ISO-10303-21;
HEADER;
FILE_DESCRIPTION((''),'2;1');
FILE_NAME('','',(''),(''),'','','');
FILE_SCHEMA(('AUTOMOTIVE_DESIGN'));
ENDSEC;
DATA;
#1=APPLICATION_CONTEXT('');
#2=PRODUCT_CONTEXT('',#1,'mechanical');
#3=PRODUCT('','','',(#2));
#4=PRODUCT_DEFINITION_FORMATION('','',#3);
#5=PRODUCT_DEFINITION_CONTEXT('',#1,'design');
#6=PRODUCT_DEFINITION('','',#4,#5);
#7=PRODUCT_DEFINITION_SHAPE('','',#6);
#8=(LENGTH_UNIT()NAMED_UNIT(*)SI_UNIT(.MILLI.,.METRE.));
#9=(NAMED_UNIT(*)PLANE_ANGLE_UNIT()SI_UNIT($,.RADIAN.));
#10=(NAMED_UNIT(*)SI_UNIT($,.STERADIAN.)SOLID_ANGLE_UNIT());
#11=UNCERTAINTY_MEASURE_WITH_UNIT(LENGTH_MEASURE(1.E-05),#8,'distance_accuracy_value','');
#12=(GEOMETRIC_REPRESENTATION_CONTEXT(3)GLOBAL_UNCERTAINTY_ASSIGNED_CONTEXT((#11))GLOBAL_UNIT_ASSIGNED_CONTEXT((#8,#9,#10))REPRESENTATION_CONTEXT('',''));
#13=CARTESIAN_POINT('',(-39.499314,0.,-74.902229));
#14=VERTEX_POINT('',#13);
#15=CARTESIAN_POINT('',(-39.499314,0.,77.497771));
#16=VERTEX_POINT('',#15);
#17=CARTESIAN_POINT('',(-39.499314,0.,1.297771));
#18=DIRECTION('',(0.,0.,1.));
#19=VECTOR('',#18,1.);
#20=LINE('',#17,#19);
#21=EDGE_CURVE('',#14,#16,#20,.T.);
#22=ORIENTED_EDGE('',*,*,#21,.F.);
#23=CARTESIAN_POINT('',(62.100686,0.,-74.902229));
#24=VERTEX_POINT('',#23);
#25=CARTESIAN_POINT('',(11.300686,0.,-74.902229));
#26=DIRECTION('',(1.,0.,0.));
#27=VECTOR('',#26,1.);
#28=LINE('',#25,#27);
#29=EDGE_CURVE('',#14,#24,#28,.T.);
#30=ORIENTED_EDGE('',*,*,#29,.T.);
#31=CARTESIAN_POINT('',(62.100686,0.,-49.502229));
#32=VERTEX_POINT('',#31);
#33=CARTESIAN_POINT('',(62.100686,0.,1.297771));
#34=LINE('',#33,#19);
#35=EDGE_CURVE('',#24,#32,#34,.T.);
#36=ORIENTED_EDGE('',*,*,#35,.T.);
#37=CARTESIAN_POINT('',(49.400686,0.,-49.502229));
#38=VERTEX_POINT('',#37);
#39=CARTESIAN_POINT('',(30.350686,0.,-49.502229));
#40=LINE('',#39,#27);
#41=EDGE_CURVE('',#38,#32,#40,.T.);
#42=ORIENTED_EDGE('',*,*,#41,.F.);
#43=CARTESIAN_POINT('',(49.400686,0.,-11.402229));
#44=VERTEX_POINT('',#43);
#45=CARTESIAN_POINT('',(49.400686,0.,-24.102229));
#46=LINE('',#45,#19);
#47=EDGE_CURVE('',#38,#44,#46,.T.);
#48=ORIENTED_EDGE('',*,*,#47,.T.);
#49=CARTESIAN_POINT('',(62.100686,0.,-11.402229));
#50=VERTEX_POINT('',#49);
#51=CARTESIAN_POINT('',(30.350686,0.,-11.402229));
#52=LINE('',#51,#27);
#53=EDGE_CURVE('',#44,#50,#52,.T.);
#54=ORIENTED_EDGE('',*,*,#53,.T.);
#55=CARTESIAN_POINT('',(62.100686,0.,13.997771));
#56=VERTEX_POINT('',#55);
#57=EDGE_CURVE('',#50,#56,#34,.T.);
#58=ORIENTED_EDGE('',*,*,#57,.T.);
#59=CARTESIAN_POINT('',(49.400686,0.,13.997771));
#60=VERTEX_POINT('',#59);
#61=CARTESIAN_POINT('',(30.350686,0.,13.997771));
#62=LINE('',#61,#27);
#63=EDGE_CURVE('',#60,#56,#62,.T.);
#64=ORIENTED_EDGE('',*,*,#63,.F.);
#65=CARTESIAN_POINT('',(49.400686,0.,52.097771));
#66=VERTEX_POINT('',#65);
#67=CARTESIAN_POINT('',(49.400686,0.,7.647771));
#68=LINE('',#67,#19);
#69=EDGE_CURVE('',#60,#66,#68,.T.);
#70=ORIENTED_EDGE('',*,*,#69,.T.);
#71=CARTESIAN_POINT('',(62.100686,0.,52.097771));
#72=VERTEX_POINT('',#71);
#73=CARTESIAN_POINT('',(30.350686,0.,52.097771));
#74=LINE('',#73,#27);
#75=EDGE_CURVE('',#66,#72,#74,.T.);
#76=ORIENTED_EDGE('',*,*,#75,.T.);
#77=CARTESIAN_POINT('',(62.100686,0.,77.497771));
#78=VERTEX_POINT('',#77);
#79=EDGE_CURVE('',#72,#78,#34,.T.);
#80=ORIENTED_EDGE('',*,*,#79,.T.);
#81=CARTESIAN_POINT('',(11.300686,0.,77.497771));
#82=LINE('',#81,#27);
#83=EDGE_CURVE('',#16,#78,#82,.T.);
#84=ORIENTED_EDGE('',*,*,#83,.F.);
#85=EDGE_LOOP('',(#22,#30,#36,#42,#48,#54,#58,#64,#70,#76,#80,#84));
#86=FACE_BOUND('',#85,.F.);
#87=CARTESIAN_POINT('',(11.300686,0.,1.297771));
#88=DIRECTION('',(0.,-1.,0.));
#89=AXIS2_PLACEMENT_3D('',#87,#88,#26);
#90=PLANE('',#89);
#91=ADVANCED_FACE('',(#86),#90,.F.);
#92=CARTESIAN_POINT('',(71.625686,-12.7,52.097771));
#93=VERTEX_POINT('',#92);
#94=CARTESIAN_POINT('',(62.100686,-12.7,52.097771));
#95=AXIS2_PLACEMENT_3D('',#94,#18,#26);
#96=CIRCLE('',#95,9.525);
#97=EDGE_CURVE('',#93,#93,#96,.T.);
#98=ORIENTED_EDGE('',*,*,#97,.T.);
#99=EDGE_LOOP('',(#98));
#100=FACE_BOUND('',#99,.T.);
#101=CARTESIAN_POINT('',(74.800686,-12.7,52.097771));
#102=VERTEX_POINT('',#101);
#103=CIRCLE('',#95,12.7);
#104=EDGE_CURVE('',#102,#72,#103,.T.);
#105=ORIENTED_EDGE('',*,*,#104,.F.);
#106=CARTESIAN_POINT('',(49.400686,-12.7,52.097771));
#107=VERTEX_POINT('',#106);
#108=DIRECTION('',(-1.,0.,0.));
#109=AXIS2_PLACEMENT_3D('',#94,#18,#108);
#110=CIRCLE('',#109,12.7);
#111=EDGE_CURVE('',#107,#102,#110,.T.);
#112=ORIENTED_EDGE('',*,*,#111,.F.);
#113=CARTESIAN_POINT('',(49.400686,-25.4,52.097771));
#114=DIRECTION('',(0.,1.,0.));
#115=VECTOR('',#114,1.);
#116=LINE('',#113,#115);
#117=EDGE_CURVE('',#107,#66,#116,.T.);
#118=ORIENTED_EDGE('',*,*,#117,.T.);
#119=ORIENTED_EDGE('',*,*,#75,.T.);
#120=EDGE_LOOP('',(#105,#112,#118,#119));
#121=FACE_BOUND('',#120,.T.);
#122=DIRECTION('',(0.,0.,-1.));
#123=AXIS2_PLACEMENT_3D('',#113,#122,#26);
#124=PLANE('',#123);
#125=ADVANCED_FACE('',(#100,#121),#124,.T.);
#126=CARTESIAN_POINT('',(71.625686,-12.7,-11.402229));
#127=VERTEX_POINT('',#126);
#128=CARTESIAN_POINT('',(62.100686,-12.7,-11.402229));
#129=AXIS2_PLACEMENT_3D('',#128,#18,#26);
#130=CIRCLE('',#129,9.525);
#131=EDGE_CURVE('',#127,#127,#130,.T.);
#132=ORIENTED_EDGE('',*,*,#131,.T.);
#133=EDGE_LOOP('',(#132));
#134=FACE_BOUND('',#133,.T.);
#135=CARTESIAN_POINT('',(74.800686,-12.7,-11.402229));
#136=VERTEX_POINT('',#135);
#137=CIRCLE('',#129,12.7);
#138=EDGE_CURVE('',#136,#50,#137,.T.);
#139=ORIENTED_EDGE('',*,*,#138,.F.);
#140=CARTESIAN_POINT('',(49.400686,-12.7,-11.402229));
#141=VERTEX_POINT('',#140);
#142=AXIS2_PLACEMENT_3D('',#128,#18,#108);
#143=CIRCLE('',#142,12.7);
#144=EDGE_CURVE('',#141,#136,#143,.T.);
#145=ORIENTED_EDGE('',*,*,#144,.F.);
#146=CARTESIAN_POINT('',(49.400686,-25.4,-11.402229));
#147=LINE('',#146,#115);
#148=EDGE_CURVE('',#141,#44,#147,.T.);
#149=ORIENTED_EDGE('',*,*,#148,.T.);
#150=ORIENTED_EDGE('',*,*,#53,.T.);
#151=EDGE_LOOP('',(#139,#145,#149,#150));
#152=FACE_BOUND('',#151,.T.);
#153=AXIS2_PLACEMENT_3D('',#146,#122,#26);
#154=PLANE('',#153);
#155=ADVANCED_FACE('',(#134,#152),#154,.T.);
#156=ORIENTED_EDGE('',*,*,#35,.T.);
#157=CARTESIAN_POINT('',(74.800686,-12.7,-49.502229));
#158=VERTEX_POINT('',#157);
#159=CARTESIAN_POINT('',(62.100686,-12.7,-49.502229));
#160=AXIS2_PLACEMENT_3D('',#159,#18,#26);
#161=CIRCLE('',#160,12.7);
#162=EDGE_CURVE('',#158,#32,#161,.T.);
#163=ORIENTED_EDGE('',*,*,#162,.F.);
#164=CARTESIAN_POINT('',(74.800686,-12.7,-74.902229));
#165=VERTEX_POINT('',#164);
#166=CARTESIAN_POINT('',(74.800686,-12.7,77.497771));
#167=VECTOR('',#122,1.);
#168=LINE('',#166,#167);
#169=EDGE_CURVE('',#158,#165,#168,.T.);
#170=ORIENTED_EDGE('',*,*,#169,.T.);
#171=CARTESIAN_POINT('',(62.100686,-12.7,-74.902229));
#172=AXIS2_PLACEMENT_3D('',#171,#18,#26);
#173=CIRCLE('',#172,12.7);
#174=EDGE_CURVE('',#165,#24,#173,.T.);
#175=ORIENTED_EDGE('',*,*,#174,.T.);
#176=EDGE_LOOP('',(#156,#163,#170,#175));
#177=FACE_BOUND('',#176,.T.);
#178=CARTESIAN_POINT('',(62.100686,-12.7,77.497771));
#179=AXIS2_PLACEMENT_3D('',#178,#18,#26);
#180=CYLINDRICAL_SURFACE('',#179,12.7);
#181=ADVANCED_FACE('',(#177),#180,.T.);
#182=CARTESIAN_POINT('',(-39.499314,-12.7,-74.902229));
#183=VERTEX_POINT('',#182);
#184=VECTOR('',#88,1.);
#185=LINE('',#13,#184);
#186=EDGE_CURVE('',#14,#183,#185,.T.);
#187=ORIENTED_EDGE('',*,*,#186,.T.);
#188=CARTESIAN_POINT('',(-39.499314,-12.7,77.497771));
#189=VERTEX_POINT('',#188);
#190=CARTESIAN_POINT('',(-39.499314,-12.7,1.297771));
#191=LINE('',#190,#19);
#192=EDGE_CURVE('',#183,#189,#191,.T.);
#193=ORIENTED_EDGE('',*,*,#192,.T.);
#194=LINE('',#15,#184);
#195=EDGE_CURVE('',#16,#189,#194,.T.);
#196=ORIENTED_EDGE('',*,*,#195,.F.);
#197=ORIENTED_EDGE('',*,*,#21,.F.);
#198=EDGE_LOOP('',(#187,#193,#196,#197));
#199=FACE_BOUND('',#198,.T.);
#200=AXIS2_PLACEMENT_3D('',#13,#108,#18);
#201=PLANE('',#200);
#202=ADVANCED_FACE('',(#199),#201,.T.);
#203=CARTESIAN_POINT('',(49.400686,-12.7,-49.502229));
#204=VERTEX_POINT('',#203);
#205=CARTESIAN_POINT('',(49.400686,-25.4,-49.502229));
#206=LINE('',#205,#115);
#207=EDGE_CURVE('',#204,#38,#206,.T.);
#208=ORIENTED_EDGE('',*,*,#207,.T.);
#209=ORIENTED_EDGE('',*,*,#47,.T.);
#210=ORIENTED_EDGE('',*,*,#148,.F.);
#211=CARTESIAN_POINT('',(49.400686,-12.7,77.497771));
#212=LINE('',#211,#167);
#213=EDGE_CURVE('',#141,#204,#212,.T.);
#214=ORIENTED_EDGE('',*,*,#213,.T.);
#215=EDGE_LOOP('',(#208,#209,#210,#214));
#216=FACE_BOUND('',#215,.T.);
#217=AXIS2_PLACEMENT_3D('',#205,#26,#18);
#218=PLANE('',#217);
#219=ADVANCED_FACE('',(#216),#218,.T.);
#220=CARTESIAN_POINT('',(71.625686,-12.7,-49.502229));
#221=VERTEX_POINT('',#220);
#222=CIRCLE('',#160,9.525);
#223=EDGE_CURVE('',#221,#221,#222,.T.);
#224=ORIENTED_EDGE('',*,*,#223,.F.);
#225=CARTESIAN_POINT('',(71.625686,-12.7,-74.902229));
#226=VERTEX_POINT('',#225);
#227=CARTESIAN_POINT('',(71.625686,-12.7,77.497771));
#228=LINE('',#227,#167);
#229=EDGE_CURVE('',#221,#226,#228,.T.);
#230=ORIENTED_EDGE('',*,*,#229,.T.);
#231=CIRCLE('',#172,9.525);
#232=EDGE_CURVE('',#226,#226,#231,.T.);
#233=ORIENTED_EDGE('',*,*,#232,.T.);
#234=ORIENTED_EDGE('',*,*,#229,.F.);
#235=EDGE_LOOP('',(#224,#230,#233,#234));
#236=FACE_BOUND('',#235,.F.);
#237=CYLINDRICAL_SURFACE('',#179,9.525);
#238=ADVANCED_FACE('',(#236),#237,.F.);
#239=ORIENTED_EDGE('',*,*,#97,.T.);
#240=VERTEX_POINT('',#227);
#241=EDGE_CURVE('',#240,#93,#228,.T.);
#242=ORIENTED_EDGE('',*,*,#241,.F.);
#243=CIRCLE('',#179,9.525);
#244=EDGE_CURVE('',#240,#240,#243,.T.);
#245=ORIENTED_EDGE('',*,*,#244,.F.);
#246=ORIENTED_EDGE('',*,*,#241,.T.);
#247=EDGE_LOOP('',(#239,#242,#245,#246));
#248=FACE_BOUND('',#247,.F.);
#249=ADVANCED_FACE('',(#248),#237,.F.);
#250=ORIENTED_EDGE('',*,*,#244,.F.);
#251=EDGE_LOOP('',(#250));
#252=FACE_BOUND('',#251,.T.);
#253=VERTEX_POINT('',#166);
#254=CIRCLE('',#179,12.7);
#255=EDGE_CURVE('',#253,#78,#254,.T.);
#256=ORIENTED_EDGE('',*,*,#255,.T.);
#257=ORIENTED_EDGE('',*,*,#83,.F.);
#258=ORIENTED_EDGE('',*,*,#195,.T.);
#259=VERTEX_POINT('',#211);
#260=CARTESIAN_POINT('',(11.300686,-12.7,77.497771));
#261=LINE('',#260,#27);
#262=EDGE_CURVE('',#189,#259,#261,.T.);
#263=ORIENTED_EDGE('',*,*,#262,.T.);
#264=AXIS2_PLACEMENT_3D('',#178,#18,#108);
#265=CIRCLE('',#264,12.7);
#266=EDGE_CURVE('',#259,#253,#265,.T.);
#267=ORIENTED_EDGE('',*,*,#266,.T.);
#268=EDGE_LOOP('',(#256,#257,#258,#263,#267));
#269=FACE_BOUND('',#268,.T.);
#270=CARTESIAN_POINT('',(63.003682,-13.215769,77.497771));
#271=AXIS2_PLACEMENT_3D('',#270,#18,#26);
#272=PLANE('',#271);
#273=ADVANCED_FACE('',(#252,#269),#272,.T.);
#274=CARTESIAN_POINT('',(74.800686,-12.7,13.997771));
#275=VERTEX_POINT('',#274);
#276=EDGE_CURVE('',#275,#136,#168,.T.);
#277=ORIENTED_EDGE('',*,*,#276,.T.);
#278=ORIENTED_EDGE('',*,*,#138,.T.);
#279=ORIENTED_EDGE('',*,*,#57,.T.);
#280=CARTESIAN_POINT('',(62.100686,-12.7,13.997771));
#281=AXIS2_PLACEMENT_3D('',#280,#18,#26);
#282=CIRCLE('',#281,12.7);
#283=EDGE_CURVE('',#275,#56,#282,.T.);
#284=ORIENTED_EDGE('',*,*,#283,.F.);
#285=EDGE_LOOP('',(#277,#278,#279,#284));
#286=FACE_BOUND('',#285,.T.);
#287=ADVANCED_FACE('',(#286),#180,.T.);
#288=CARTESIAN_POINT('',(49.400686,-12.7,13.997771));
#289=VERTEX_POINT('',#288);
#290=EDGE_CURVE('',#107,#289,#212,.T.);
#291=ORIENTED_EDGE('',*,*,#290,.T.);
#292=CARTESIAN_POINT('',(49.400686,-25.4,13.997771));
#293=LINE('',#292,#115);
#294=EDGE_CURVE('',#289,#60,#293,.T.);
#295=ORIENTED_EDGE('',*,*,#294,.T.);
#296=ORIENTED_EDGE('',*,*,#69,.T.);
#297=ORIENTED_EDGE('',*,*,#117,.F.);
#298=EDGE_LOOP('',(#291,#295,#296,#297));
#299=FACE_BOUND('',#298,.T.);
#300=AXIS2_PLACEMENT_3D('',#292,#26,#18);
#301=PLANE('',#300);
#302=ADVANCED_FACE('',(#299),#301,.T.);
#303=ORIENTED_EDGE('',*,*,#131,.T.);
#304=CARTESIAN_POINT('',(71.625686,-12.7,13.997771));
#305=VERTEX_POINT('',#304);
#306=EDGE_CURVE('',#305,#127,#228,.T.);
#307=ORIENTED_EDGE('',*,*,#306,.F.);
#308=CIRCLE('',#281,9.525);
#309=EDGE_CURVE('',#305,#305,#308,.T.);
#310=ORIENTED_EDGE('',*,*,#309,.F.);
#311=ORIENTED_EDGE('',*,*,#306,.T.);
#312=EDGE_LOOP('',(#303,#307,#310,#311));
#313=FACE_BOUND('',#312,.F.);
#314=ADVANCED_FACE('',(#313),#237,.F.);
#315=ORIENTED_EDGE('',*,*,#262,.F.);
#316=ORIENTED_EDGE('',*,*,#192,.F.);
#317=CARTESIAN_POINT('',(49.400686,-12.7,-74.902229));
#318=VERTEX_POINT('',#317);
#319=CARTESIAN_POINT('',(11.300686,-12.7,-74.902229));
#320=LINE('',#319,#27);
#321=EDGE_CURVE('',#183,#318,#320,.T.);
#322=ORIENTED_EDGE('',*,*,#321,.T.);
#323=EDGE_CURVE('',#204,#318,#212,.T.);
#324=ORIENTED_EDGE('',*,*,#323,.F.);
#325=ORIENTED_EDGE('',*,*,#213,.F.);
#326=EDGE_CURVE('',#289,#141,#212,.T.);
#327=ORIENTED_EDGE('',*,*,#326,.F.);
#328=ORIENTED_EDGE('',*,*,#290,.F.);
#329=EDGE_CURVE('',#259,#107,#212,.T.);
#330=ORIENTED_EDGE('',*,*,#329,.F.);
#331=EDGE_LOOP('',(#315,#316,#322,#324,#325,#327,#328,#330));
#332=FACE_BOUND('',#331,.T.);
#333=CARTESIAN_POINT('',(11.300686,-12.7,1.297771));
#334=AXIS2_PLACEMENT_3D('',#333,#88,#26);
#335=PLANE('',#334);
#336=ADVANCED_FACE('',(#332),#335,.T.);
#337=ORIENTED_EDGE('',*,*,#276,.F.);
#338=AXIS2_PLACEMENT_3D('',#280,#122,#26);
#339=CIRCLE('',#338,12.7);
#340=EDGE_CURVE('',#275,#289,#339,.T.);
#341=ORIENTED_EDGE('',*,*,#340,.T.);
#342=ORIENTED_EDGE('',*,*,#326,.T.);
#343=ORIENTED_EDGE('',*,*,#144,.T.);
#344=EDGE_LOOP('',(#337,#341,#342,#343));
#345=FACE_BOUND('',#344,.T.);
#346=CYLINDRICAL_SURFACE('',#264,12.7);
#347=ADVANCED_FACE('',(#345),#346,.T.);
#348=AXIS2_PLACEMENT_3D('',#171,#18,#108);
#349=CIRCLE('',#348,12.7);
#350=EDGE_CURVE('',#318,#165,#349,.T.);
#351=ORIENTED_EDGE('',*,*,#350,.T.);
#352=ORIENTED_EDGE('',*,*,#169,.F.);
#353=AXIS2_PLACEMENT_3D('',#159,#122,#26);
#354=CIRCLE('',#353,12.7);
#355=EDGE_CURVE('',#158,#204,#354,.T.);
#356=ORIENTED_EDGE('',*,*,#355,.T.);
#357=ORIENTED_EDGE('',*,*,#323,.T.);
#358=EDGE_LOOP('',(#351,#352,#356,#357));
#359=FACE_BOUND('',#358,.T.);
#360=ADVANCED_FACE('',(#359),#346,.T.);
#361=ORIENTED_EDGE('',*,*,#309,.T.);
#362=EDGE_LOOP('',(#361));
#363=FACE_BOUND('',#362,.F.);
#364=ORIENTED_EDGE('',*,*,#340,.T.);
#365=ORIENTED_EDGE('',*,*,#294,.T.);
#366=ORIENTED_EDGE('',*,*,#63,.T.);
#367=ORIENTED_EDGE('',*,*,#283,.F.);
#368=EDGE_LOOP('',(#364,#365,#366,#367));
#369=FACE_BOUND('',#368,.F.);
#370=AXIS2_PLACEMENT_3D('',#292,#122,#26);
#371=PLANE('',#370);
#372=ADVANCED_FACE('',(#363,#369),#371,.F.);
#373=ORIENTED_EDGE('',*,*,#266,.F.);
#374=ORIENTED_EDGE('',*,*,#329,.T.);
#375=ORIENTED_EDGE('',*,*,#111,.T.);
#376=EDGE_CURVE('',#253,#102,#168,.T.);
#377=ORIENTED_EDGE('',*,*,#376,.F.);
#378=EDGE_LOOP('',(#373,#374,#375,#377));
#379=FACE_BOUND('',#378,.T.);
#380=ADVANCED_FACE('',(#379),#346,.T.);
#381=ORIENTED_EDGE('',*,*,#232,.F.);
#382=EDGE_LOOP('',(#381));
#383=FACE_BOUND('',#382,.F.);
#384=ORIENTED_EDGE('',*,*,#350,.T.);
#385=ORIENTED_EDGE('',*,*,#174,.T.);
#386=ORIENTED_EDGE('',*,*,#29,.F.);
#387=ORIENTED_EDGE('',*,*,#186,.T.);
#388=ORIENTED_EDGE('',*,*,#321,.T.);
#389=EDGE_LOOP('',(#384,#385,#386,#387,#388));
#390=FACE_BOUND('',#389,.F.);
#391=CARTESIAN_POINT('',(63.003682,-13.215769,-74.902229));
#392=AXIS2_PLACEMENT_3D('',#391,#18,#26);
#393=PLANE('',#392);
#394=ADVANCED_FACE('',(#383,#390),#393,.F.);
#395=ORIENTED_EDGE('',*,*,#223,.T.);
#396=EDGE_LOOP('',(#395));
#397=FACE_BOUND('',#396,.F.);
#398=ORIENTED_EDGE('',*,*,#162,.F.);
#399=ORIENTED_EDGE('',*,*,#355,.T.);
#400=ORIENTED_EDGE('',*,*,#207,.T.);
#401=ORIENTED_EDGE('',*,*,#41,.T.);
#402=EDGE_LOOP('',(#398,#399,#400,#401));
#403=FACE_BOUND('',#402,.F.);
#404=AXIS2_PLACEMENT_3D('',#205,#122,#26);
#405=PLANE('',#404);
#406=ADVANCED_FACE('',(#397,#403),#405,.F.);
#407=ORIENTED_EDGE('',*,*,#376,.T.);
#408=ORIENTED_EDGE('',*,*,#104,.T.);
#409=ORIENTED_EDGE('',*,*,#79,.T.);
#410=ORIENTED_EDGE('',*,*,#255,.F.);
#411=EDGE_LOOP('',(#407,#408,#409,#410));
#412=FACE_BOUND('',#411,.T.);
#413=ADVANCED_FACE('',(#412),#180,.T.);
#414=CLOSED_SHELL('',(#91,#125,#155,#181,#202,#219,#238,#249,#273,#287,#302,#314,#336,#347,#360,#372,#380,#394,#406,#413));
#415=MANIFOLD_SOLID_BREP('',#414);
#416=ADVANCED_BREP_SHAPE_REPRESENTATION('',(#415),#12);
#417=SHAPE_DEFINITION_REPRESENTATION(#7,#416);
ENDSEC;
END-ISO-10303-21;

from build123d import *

# Parameters (mm, degrees)
F0_W     = 101.6
F0_H     = 152.4
F1_DEPTH = 12.7
F3_DEPTH = 152.4
F4_R     = 9.525
F5_DEPTH = 152.4
F7_W     = 50.8
F7_H     = 38.1
F8_DEPTH = 50.8


# Not quite as in the source:
# - a feature names something its author has since deleted; it is built from what else it names


with BuildPart() as f1:
    # F0 (on Front) → F1 (new body)
    with BuildSketch(Plane.XZ):
        with Locations((11.3006858155, 1.2977712616)):
            Rectangle(F0_W, F0_H)
    extrude(amount=F1_DEPTH)

    # F2 (on face) → F3 (join)
    with BuildSketch(Plane.XY.offset(77.4977712616)):
        with BuildLine():
            ThreePointArc((49.4006858155, -12.7), (62.1006858155, -25.4), (74.8006858155, -12.7))
            ThreePointArc((74.8006858155, -12.7), (71.0809419366, -3.7197438789), (62.1006858155, 0))
            Line((62.1006858155, 0), (62.1006858155, -12.7))
            Line((62.1006858155, -12.7), (49.4006858155, -12.7))
        make_face()
    extrude(amount=-F3_DEPTH)

    # F4 (on face) → F5 (cut, through all)
    with BuildSketch(Plane.XY.offset(77.4977712616)):
        with Locations((62.1006858155, -12.7)):
            Circle(F4_R)
    extrude(amount=-F5_DEPTH, mode=Mode.SUBTRACT)

    # F7 (on offset) → F8 (cut)
    with BuildSketch(Plane.XZ.offset(25.4)):
        with Locations((74.8006858155, 33.0477712616)):
            Rectangle(F7_W, F7_H)
        with Locations((74.8006858155, -30.4522287384)):
            Rectangle(F7_W, F7_H)
    extrude(amount=-F8_DEPTH, mode=Mode.SUBTRACT)


solid = f1.part
